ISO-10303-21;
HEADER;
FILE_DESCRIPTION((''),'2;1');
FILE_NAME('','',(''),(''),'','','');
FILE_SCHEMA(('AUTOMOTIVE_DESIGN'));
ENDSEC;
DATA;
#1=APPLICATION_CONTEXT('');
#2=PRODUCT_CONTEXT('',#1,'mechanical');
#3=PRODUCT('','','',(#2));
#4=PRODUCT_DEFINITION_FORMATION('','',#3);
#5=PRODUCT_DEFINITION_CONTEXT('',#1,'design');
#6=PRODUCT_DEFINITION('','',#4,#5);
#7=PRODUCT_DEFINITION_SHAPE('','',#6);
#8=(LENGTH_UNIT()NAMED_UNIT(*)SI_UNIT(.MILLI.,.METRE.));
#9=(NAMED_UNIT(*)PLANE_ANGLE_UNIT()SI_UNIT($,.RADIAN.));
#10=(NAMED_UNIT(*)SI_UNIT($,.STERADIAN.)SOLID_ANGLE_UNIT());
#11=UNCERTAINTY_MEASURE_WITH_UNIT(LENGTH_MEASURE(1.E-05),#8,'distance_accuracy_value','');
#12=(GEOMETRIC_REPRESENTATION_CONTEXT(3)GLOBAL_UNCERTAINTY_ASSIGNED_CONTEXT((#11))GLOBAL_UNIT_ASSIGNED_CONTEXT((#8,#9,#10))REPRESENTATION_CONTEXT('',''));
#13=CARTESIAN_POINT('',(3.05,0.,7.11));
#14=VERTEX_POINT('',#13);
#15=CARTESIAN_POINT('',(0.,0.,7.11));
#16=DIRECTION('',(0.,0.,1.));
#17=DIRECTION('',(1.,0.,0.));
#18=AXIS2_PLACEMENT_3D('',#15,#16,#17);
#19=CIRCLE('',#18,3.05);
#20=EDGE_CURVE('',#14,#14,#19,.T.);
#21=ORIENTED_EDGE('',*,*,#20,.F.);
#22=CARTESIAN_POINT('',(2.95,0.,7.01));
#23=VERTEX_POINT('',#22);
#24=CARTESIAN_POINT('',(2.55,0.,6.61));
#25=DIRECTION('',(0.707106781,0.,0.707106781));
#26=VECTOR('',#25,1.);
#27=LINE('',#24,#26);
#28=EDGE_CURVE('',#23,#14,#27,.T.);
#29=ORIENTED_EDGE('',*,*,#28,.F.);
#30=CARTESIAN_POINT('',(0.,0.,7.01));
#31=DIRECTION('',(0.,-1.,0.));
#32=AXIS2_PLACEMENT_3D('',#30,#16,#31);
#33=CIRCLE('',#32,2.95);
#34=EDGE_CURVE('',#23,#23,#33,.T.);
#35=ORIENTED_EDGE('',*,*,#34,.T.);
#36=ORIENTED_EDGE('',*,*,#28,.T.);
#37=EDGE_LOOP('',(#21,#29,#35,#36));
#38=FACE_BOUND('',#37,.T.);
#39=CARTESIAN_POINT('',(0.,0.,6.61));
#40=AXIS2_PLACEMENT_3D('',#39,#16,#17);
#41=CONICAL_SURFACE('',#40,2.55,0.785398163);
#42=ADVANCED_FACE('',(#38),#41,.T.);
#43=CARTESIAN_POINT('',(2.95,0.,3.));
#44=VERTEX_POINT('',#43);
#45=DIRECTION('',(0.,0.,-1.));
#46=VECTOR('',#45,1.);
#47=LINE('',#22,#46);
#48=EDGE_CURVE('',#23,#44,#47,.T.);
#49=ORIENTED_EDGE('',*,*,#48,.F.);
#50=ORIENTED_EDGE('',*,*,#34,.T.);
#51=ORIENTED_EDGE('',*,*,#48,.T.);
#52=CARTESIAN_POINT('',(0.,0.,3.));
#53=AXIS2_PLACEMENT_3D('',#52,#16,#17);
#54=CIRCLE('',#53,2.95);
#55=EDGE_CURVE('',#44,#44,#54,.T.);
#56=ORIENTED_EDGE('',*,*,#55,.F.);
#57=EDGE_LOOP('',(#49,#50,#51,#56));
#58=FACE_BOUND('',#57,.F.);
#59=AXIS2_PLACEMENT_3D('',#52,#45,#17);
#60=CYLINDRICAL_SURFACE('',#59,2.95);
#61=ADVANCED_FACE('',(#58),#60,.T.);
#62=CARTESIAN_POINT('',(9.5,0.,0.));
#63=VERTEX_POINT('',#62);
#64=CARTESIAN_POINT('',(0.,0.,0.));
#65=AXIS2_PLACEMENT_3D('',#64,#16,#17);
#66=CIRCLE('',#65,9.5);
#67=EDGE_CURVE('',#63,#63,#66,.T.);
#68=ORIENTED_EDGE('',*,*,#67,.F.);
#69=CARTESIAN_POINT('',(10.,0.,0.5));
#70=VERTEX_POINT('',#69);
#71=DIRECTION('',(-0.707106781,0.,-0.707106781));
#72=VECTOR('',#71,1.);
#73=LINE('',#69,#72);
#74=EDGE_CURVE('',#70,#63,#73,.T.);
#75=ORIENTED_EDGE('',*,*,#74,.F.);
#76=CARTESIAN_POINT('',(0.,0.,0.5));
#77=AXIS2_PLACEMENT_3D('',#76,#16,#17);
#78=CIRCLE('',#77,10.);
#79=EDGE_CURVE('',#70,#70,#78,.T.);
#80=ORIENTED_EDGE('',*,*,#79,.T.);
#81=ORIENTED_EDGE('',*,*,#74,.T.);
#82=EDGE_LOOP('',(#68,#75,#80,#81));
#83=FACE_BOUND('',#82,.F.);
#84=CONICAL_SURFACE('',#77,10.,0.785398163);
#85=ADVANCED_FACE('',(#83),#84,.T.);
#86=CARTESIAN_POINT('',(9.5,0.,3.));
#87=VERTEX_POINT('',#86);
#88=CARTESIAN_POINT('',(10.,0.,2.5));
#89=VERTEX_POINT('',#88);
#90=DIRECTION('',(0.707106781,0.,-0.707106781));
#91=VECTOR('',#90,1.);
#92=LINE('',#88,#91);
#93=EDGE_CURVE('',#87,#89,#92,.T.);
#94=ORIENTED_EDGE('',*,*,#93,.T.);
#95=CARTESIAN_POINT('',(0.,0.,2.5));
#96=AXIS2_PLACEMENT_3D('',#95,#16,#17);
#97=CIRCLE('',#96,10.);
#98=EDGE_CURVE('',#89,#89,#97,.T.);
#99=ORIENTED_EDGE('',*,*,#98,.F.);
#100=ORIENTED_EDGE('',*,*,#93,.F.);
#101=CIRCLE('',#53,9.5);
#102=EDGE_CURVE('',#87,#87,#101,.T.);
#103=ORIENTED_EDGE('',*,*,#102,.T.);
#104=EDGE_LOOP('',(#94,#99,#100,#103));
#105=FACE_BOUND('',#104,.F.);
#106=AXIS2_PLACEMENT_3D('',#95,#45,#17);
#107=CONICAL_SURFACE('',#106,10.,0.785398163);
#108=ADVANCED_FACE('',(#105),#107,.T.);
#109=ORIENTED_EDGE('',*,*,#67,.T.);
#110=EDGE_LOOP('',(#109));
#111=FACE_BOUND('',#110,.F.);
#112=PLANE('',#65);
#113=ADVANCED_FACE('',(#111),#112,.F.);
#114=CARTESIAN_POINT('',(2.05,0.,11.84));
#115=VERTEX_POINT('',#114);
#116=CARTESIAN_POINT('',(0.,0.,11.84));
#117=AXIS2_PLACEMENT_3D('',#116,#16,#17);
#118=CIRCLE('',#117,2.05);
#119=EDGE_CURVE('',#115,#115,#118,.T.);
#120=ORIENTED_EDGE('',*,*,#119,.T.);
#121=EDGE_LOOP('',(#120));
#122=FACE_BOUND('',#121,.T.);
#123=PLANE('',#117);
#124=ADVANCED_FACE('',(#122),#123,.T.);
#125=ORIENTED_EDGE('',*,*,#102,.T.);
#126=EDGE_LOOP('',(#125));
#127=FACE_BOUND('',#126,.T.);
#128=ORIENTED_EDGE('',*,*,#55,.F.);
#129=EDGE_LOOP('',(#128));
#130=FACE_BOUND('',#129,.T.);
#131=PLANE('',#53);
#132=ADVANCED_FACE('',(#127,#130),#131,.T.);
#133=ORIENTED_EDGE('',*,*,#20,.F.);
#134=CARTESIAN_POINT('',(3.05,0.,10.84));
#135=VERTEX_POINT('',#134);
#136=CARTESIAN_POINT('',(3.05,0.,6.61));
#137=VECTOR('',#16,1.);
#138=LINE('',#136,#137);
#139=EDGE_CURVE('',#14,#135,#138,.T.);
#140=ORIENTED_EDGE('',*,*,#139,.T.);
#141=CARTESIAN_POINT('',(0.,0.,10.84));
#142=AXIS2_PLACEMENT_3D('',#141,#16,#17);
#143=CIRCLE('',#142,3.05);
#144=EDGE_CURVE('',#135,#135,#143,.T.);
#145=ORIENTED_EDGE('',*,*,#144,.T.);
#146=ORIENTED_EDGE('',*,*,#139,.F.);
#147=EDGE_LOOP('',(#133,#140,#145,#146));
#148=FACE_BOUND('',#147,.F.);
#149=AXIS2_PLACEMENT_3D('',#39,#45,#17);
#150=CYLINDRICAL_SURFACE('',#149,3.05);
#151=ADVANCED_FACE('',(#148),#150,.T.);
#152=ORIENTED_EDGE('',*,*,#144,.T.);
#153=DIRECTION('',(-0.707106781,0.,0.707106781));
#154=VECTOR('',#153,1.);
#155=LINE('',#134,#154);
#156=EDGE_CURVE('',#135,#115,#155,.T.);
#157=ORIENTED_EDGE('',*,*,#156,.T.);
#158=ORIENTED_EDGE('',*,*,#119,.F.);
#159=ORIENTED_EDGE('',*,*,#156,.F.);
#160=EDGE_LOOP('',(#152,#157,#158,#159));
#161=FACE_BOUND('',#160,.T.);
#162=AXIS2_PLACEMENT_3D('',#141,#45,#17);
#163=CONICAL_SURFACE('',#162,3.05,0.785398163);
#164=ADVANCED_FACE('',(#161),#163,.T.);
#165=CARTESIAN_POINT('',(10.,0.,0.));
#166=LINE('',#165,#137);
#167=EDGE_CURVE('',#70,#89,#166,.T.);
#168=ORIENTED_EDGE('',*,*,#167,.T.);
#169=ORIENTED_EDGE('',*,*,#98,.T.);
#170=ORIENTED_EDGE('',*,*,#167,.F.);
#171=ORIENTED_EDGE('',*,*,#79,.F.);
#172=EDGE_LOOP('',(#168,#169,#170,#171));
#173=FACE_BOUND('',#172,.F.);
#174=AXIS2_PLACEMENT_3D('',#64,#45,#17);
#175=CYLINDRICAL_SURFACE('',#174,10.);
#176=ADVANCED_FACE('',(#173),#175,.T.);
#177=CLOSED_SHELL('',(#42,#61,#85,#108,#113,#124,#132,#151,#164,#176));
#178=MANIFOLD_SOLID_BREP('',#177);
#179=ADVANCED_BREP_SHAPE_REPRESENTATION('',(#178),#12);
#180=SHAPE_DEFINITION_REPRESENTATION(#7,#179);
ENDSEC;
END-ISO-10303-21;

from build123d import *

# Parameters (mm, degrees)
F0_R        = 10
F1_DEPTH    = 3
F2_R        = 2.95
F3_DEPTH    = 3.61
F4_R        = 3.05
F4_R_2      = 2.95
F5_DEPTH    = 5.23
F6_SIZE     = 1
F7_SIZE     = 0.5
F8_S5_R     = 2.95
F8_T6_DEPTH = 6


# Not quite as in the source:
# - a fillet or chamfer that OpenCascade refuses, or shapes differently, is made with other operations: its cross-section is extruded or revolved along the edge and cut away or added


with BuildPart() as f1:
    # F0 (on Top) → F1 (new body)
    with BuildSketch(Plane.XY):
        Circle(F0_R)
    extrude(amount=F1_DEPTH)

    # F2 (on face) → F3 (join)
    with BuildSketch(Plane.XY.offset(3)):
        Circle(F2_R)
    extrude(amount=F3_DEPTH)

    # F4 (on face) → F5 (join)
    with BuildSketch(Plane.XY.offset(6.61)):
        Circle(F4_R)
        Circle(F4_R_2, mode=Mode.SUBTRACT)
        Circle(F4_R_2)
    extrude(amount=F5_DEPTH)

    # F6
    f6_edges = [f1.edges().sort_by_distance(p)[0] for p in [
        (-3.05, 0, 11.84),
    ]]
    chamfer(f6_edges, length=F6_SIZE)

    # F7
    f7_edges = [f1.edges().sort_by_distance(p)[0] for p in [
        (-10, 0, 3),
        (-10, 0, 0),
    ]]
    chamfer(f7_edges, length=F7_SIZE)

    # F8: chamfer of 0.5 on 1 edges, made by hand


with BuildPart() as f8_tool2:
    # F8_s3 → F8_t4 (revolve)
    with BuildSketch(Plane.XZ):
        Polygon((2.55, 6.61), (3.05, 7.11), (3.05, 6.61), align=None)
    revolve(axis=Axis((0, 0, 6.61), (0, 0, 1)))

    # F8_s5 → F8_t6 (cut, symmetric)
    with BuildSketch(Plane.XY.offset(6.9)):
        Circle(F8_S5_R)
    extrude(amount=F8_T6_DEPTH, both=True, mode=Mode.SUBTRACT)


with BuildPart() as f1_1:
    add(f1.part)

    # F8_t1: cut F8_tool2
    add(f8_tool2.part, mode=Mode.SUBTRACT)


solid = f1_1.part
